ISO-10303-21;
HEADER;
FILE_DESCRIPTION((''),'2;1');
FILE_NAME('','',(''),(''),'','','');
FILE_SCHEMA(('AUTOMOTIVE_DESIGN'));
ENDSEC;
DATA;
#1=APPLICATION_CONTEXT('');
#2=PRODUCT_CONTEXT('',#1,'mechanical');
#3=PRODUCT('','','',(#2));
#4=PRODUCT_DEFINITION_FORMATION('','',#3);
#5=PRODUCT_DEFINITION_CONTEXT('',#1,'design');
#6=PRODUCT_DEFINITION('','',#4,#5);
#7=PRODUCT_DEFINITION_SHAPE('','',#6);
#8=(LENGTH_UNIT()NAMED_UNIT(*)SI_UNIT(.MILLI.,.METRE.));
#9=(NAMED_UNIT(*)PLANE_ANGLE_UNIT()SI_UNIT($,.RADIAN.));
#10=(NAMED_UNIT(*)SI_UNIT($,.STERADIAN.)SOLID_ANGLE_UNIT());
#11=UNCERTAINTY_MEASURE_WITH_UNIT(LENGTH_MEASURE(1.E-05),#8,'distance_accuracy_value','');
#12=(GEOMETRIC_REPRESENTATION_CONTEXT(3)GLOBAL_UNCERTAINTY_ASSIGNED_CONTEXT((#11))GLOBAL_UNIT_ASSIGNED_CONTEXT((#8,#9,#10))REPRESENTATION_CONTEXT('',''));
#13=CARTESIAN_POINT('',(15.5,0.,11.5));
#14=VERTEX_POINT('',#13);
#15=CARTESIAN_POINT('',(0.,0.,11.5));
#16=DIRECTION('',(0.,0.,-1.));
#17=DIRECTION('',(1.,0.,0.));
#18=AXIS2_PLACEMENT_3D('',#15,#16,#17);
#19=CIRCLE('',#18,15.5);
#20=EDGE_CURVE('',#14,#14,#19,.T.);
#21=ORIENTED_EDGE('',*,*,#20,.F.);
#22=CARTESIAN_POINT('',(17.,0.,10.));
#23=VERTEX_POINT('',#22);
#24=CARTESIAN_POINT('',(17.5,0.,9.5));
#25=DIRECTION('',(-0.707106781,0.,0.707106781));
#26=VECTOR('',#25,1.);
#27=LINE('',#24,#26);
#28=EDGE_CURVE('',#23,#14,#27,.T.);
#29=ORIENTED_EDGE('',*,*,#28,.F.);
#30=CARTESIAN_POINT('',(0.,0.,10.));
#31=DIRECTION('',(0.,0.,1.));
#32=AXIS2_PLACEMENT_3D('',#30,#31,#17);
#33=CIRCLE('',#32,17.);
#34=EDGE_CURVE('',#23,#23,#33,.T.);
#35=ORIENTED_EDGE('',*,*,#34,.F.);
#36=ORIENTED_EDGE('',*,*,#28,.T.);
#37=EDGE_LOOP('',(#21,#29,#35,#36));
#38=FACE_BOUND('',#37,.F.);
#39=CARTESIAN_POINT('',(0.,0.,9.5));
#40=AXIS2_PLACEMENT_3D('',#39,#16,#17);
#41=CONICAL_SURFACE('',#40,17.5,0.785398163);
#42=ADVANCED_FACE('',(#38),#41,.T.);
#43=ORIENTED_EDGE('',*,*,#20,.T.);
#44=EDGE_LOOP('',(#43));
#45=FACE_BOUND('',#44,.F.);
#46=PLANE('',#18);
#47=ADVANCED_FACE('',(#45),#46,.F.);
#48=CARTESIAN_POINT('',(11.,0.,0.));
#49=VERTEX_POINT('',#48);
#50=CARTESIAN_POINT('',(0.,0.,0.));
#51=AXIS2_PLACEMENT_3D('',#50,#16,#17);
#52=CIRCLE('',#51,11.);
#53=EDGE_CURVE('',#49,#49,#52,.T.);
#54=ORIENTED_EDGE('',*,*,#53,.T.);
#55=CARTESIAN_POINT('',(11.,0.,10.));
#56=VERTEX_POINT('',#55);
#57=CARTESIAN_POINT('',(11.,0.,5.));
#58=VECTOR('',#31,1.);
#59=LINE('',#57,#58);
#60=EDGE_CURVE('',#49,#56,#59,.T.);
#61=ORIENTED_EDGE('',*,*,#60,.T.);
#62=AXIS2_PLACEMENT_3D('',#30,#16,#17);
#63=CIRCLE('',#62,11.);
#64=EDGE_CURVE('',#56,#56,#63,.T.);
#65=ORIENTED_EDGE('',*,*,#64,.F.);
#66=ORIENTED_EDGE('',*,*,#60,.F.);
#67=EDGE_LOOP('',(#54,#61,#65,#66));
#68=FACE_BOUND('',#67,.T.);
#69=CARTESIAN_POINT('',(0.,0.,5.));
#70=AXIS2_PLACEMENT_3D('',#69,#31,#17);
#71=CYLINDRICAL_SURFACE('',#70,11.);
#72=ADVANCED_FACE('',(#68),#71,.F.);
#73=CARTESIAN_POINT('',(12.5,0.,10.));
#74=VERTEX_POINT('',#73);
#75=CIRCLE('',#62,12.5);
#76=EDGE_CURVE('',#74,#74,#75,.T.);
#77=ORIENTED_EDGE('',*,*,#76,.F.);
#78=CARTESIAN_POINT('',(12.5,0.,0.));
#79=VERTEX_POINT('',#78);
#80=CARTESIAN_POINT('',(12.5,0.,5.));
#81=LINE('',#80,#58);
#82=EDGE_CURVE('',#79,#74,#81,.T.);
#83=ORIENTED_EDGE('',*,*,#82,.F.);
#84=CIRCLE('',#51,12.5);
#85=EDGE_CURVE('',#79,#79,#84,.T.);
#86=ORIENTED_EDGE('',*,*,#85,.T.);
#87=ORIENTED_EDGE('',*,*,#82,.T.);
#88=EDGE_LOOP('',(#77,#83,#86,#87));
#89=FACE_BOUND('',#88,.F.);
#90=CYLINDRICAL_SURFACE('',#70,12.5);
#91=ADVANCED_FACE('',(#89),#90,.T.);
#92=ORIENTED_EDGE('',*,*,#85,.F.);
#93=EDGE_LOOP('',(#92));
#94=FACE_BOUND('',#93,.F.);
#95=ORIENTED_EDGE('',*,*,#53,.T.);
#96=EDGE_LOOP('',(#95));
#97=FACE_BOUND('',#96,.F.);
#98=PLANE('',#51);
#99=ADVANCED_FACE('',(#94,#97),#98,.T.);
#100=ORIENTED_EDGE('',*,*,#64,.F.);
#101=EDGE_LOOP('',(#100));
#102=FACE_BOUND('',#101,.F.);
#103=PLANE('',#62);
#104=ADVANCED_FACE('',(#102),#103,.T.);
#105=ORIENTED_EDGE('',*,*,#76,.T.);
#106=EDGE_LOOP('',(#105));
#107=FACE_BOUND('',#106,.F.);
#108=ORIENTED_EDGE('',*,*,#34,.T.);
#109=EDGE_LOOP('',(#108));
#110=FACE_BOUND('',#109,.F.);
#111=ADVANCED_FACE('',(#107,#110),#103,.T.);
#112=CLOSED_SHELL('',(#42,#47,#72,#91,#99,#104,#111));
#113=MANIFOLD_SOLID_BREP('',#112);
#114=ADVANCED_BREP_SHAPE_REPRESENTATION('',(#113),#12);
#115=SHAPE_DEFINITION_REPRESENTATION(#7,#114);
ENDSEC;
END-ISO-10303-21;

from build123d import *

# Parameters (mm, degrees)
F0_W = 1.5
F0_H = 10


# Not quite as in the source:
# - a fillet or chamfer that OpenCascade refuses, or shapes differently, is made with other operations: its cross-section is extruded or revolved along the edge and cut away or added


with BuildPart() as f1:
    # F0 (on Front) → F1 (revolve)
    with BuildSketch(Plane.XZ):
        Polygon((0, 11.5), (0, 10), (11, 10), (12.5, 10), (17.5, 10), (17.5, 11.5), align=None)
        with Locations((11.75, 5)):
            Rectangle(F0_W, F0_H)
    revolve(axis=Axis((0, 0, 10.75), (0, 0, -1)))

    # F2: chamfer of 2 on 1 edges, made by hand

    # F2_s1 → F2_t2 (revolve, cut)
    with BuildSketch(Plane.XZ):
        Polygon((17.5, 9.5), (15.5, 11.5), (17.5, 11.5), align=None)
    revolve(axis=Axis((0, 0, 11.5), (0, 0, -1)), mode=Mode.SUBTRACT)


solid = f1.part
